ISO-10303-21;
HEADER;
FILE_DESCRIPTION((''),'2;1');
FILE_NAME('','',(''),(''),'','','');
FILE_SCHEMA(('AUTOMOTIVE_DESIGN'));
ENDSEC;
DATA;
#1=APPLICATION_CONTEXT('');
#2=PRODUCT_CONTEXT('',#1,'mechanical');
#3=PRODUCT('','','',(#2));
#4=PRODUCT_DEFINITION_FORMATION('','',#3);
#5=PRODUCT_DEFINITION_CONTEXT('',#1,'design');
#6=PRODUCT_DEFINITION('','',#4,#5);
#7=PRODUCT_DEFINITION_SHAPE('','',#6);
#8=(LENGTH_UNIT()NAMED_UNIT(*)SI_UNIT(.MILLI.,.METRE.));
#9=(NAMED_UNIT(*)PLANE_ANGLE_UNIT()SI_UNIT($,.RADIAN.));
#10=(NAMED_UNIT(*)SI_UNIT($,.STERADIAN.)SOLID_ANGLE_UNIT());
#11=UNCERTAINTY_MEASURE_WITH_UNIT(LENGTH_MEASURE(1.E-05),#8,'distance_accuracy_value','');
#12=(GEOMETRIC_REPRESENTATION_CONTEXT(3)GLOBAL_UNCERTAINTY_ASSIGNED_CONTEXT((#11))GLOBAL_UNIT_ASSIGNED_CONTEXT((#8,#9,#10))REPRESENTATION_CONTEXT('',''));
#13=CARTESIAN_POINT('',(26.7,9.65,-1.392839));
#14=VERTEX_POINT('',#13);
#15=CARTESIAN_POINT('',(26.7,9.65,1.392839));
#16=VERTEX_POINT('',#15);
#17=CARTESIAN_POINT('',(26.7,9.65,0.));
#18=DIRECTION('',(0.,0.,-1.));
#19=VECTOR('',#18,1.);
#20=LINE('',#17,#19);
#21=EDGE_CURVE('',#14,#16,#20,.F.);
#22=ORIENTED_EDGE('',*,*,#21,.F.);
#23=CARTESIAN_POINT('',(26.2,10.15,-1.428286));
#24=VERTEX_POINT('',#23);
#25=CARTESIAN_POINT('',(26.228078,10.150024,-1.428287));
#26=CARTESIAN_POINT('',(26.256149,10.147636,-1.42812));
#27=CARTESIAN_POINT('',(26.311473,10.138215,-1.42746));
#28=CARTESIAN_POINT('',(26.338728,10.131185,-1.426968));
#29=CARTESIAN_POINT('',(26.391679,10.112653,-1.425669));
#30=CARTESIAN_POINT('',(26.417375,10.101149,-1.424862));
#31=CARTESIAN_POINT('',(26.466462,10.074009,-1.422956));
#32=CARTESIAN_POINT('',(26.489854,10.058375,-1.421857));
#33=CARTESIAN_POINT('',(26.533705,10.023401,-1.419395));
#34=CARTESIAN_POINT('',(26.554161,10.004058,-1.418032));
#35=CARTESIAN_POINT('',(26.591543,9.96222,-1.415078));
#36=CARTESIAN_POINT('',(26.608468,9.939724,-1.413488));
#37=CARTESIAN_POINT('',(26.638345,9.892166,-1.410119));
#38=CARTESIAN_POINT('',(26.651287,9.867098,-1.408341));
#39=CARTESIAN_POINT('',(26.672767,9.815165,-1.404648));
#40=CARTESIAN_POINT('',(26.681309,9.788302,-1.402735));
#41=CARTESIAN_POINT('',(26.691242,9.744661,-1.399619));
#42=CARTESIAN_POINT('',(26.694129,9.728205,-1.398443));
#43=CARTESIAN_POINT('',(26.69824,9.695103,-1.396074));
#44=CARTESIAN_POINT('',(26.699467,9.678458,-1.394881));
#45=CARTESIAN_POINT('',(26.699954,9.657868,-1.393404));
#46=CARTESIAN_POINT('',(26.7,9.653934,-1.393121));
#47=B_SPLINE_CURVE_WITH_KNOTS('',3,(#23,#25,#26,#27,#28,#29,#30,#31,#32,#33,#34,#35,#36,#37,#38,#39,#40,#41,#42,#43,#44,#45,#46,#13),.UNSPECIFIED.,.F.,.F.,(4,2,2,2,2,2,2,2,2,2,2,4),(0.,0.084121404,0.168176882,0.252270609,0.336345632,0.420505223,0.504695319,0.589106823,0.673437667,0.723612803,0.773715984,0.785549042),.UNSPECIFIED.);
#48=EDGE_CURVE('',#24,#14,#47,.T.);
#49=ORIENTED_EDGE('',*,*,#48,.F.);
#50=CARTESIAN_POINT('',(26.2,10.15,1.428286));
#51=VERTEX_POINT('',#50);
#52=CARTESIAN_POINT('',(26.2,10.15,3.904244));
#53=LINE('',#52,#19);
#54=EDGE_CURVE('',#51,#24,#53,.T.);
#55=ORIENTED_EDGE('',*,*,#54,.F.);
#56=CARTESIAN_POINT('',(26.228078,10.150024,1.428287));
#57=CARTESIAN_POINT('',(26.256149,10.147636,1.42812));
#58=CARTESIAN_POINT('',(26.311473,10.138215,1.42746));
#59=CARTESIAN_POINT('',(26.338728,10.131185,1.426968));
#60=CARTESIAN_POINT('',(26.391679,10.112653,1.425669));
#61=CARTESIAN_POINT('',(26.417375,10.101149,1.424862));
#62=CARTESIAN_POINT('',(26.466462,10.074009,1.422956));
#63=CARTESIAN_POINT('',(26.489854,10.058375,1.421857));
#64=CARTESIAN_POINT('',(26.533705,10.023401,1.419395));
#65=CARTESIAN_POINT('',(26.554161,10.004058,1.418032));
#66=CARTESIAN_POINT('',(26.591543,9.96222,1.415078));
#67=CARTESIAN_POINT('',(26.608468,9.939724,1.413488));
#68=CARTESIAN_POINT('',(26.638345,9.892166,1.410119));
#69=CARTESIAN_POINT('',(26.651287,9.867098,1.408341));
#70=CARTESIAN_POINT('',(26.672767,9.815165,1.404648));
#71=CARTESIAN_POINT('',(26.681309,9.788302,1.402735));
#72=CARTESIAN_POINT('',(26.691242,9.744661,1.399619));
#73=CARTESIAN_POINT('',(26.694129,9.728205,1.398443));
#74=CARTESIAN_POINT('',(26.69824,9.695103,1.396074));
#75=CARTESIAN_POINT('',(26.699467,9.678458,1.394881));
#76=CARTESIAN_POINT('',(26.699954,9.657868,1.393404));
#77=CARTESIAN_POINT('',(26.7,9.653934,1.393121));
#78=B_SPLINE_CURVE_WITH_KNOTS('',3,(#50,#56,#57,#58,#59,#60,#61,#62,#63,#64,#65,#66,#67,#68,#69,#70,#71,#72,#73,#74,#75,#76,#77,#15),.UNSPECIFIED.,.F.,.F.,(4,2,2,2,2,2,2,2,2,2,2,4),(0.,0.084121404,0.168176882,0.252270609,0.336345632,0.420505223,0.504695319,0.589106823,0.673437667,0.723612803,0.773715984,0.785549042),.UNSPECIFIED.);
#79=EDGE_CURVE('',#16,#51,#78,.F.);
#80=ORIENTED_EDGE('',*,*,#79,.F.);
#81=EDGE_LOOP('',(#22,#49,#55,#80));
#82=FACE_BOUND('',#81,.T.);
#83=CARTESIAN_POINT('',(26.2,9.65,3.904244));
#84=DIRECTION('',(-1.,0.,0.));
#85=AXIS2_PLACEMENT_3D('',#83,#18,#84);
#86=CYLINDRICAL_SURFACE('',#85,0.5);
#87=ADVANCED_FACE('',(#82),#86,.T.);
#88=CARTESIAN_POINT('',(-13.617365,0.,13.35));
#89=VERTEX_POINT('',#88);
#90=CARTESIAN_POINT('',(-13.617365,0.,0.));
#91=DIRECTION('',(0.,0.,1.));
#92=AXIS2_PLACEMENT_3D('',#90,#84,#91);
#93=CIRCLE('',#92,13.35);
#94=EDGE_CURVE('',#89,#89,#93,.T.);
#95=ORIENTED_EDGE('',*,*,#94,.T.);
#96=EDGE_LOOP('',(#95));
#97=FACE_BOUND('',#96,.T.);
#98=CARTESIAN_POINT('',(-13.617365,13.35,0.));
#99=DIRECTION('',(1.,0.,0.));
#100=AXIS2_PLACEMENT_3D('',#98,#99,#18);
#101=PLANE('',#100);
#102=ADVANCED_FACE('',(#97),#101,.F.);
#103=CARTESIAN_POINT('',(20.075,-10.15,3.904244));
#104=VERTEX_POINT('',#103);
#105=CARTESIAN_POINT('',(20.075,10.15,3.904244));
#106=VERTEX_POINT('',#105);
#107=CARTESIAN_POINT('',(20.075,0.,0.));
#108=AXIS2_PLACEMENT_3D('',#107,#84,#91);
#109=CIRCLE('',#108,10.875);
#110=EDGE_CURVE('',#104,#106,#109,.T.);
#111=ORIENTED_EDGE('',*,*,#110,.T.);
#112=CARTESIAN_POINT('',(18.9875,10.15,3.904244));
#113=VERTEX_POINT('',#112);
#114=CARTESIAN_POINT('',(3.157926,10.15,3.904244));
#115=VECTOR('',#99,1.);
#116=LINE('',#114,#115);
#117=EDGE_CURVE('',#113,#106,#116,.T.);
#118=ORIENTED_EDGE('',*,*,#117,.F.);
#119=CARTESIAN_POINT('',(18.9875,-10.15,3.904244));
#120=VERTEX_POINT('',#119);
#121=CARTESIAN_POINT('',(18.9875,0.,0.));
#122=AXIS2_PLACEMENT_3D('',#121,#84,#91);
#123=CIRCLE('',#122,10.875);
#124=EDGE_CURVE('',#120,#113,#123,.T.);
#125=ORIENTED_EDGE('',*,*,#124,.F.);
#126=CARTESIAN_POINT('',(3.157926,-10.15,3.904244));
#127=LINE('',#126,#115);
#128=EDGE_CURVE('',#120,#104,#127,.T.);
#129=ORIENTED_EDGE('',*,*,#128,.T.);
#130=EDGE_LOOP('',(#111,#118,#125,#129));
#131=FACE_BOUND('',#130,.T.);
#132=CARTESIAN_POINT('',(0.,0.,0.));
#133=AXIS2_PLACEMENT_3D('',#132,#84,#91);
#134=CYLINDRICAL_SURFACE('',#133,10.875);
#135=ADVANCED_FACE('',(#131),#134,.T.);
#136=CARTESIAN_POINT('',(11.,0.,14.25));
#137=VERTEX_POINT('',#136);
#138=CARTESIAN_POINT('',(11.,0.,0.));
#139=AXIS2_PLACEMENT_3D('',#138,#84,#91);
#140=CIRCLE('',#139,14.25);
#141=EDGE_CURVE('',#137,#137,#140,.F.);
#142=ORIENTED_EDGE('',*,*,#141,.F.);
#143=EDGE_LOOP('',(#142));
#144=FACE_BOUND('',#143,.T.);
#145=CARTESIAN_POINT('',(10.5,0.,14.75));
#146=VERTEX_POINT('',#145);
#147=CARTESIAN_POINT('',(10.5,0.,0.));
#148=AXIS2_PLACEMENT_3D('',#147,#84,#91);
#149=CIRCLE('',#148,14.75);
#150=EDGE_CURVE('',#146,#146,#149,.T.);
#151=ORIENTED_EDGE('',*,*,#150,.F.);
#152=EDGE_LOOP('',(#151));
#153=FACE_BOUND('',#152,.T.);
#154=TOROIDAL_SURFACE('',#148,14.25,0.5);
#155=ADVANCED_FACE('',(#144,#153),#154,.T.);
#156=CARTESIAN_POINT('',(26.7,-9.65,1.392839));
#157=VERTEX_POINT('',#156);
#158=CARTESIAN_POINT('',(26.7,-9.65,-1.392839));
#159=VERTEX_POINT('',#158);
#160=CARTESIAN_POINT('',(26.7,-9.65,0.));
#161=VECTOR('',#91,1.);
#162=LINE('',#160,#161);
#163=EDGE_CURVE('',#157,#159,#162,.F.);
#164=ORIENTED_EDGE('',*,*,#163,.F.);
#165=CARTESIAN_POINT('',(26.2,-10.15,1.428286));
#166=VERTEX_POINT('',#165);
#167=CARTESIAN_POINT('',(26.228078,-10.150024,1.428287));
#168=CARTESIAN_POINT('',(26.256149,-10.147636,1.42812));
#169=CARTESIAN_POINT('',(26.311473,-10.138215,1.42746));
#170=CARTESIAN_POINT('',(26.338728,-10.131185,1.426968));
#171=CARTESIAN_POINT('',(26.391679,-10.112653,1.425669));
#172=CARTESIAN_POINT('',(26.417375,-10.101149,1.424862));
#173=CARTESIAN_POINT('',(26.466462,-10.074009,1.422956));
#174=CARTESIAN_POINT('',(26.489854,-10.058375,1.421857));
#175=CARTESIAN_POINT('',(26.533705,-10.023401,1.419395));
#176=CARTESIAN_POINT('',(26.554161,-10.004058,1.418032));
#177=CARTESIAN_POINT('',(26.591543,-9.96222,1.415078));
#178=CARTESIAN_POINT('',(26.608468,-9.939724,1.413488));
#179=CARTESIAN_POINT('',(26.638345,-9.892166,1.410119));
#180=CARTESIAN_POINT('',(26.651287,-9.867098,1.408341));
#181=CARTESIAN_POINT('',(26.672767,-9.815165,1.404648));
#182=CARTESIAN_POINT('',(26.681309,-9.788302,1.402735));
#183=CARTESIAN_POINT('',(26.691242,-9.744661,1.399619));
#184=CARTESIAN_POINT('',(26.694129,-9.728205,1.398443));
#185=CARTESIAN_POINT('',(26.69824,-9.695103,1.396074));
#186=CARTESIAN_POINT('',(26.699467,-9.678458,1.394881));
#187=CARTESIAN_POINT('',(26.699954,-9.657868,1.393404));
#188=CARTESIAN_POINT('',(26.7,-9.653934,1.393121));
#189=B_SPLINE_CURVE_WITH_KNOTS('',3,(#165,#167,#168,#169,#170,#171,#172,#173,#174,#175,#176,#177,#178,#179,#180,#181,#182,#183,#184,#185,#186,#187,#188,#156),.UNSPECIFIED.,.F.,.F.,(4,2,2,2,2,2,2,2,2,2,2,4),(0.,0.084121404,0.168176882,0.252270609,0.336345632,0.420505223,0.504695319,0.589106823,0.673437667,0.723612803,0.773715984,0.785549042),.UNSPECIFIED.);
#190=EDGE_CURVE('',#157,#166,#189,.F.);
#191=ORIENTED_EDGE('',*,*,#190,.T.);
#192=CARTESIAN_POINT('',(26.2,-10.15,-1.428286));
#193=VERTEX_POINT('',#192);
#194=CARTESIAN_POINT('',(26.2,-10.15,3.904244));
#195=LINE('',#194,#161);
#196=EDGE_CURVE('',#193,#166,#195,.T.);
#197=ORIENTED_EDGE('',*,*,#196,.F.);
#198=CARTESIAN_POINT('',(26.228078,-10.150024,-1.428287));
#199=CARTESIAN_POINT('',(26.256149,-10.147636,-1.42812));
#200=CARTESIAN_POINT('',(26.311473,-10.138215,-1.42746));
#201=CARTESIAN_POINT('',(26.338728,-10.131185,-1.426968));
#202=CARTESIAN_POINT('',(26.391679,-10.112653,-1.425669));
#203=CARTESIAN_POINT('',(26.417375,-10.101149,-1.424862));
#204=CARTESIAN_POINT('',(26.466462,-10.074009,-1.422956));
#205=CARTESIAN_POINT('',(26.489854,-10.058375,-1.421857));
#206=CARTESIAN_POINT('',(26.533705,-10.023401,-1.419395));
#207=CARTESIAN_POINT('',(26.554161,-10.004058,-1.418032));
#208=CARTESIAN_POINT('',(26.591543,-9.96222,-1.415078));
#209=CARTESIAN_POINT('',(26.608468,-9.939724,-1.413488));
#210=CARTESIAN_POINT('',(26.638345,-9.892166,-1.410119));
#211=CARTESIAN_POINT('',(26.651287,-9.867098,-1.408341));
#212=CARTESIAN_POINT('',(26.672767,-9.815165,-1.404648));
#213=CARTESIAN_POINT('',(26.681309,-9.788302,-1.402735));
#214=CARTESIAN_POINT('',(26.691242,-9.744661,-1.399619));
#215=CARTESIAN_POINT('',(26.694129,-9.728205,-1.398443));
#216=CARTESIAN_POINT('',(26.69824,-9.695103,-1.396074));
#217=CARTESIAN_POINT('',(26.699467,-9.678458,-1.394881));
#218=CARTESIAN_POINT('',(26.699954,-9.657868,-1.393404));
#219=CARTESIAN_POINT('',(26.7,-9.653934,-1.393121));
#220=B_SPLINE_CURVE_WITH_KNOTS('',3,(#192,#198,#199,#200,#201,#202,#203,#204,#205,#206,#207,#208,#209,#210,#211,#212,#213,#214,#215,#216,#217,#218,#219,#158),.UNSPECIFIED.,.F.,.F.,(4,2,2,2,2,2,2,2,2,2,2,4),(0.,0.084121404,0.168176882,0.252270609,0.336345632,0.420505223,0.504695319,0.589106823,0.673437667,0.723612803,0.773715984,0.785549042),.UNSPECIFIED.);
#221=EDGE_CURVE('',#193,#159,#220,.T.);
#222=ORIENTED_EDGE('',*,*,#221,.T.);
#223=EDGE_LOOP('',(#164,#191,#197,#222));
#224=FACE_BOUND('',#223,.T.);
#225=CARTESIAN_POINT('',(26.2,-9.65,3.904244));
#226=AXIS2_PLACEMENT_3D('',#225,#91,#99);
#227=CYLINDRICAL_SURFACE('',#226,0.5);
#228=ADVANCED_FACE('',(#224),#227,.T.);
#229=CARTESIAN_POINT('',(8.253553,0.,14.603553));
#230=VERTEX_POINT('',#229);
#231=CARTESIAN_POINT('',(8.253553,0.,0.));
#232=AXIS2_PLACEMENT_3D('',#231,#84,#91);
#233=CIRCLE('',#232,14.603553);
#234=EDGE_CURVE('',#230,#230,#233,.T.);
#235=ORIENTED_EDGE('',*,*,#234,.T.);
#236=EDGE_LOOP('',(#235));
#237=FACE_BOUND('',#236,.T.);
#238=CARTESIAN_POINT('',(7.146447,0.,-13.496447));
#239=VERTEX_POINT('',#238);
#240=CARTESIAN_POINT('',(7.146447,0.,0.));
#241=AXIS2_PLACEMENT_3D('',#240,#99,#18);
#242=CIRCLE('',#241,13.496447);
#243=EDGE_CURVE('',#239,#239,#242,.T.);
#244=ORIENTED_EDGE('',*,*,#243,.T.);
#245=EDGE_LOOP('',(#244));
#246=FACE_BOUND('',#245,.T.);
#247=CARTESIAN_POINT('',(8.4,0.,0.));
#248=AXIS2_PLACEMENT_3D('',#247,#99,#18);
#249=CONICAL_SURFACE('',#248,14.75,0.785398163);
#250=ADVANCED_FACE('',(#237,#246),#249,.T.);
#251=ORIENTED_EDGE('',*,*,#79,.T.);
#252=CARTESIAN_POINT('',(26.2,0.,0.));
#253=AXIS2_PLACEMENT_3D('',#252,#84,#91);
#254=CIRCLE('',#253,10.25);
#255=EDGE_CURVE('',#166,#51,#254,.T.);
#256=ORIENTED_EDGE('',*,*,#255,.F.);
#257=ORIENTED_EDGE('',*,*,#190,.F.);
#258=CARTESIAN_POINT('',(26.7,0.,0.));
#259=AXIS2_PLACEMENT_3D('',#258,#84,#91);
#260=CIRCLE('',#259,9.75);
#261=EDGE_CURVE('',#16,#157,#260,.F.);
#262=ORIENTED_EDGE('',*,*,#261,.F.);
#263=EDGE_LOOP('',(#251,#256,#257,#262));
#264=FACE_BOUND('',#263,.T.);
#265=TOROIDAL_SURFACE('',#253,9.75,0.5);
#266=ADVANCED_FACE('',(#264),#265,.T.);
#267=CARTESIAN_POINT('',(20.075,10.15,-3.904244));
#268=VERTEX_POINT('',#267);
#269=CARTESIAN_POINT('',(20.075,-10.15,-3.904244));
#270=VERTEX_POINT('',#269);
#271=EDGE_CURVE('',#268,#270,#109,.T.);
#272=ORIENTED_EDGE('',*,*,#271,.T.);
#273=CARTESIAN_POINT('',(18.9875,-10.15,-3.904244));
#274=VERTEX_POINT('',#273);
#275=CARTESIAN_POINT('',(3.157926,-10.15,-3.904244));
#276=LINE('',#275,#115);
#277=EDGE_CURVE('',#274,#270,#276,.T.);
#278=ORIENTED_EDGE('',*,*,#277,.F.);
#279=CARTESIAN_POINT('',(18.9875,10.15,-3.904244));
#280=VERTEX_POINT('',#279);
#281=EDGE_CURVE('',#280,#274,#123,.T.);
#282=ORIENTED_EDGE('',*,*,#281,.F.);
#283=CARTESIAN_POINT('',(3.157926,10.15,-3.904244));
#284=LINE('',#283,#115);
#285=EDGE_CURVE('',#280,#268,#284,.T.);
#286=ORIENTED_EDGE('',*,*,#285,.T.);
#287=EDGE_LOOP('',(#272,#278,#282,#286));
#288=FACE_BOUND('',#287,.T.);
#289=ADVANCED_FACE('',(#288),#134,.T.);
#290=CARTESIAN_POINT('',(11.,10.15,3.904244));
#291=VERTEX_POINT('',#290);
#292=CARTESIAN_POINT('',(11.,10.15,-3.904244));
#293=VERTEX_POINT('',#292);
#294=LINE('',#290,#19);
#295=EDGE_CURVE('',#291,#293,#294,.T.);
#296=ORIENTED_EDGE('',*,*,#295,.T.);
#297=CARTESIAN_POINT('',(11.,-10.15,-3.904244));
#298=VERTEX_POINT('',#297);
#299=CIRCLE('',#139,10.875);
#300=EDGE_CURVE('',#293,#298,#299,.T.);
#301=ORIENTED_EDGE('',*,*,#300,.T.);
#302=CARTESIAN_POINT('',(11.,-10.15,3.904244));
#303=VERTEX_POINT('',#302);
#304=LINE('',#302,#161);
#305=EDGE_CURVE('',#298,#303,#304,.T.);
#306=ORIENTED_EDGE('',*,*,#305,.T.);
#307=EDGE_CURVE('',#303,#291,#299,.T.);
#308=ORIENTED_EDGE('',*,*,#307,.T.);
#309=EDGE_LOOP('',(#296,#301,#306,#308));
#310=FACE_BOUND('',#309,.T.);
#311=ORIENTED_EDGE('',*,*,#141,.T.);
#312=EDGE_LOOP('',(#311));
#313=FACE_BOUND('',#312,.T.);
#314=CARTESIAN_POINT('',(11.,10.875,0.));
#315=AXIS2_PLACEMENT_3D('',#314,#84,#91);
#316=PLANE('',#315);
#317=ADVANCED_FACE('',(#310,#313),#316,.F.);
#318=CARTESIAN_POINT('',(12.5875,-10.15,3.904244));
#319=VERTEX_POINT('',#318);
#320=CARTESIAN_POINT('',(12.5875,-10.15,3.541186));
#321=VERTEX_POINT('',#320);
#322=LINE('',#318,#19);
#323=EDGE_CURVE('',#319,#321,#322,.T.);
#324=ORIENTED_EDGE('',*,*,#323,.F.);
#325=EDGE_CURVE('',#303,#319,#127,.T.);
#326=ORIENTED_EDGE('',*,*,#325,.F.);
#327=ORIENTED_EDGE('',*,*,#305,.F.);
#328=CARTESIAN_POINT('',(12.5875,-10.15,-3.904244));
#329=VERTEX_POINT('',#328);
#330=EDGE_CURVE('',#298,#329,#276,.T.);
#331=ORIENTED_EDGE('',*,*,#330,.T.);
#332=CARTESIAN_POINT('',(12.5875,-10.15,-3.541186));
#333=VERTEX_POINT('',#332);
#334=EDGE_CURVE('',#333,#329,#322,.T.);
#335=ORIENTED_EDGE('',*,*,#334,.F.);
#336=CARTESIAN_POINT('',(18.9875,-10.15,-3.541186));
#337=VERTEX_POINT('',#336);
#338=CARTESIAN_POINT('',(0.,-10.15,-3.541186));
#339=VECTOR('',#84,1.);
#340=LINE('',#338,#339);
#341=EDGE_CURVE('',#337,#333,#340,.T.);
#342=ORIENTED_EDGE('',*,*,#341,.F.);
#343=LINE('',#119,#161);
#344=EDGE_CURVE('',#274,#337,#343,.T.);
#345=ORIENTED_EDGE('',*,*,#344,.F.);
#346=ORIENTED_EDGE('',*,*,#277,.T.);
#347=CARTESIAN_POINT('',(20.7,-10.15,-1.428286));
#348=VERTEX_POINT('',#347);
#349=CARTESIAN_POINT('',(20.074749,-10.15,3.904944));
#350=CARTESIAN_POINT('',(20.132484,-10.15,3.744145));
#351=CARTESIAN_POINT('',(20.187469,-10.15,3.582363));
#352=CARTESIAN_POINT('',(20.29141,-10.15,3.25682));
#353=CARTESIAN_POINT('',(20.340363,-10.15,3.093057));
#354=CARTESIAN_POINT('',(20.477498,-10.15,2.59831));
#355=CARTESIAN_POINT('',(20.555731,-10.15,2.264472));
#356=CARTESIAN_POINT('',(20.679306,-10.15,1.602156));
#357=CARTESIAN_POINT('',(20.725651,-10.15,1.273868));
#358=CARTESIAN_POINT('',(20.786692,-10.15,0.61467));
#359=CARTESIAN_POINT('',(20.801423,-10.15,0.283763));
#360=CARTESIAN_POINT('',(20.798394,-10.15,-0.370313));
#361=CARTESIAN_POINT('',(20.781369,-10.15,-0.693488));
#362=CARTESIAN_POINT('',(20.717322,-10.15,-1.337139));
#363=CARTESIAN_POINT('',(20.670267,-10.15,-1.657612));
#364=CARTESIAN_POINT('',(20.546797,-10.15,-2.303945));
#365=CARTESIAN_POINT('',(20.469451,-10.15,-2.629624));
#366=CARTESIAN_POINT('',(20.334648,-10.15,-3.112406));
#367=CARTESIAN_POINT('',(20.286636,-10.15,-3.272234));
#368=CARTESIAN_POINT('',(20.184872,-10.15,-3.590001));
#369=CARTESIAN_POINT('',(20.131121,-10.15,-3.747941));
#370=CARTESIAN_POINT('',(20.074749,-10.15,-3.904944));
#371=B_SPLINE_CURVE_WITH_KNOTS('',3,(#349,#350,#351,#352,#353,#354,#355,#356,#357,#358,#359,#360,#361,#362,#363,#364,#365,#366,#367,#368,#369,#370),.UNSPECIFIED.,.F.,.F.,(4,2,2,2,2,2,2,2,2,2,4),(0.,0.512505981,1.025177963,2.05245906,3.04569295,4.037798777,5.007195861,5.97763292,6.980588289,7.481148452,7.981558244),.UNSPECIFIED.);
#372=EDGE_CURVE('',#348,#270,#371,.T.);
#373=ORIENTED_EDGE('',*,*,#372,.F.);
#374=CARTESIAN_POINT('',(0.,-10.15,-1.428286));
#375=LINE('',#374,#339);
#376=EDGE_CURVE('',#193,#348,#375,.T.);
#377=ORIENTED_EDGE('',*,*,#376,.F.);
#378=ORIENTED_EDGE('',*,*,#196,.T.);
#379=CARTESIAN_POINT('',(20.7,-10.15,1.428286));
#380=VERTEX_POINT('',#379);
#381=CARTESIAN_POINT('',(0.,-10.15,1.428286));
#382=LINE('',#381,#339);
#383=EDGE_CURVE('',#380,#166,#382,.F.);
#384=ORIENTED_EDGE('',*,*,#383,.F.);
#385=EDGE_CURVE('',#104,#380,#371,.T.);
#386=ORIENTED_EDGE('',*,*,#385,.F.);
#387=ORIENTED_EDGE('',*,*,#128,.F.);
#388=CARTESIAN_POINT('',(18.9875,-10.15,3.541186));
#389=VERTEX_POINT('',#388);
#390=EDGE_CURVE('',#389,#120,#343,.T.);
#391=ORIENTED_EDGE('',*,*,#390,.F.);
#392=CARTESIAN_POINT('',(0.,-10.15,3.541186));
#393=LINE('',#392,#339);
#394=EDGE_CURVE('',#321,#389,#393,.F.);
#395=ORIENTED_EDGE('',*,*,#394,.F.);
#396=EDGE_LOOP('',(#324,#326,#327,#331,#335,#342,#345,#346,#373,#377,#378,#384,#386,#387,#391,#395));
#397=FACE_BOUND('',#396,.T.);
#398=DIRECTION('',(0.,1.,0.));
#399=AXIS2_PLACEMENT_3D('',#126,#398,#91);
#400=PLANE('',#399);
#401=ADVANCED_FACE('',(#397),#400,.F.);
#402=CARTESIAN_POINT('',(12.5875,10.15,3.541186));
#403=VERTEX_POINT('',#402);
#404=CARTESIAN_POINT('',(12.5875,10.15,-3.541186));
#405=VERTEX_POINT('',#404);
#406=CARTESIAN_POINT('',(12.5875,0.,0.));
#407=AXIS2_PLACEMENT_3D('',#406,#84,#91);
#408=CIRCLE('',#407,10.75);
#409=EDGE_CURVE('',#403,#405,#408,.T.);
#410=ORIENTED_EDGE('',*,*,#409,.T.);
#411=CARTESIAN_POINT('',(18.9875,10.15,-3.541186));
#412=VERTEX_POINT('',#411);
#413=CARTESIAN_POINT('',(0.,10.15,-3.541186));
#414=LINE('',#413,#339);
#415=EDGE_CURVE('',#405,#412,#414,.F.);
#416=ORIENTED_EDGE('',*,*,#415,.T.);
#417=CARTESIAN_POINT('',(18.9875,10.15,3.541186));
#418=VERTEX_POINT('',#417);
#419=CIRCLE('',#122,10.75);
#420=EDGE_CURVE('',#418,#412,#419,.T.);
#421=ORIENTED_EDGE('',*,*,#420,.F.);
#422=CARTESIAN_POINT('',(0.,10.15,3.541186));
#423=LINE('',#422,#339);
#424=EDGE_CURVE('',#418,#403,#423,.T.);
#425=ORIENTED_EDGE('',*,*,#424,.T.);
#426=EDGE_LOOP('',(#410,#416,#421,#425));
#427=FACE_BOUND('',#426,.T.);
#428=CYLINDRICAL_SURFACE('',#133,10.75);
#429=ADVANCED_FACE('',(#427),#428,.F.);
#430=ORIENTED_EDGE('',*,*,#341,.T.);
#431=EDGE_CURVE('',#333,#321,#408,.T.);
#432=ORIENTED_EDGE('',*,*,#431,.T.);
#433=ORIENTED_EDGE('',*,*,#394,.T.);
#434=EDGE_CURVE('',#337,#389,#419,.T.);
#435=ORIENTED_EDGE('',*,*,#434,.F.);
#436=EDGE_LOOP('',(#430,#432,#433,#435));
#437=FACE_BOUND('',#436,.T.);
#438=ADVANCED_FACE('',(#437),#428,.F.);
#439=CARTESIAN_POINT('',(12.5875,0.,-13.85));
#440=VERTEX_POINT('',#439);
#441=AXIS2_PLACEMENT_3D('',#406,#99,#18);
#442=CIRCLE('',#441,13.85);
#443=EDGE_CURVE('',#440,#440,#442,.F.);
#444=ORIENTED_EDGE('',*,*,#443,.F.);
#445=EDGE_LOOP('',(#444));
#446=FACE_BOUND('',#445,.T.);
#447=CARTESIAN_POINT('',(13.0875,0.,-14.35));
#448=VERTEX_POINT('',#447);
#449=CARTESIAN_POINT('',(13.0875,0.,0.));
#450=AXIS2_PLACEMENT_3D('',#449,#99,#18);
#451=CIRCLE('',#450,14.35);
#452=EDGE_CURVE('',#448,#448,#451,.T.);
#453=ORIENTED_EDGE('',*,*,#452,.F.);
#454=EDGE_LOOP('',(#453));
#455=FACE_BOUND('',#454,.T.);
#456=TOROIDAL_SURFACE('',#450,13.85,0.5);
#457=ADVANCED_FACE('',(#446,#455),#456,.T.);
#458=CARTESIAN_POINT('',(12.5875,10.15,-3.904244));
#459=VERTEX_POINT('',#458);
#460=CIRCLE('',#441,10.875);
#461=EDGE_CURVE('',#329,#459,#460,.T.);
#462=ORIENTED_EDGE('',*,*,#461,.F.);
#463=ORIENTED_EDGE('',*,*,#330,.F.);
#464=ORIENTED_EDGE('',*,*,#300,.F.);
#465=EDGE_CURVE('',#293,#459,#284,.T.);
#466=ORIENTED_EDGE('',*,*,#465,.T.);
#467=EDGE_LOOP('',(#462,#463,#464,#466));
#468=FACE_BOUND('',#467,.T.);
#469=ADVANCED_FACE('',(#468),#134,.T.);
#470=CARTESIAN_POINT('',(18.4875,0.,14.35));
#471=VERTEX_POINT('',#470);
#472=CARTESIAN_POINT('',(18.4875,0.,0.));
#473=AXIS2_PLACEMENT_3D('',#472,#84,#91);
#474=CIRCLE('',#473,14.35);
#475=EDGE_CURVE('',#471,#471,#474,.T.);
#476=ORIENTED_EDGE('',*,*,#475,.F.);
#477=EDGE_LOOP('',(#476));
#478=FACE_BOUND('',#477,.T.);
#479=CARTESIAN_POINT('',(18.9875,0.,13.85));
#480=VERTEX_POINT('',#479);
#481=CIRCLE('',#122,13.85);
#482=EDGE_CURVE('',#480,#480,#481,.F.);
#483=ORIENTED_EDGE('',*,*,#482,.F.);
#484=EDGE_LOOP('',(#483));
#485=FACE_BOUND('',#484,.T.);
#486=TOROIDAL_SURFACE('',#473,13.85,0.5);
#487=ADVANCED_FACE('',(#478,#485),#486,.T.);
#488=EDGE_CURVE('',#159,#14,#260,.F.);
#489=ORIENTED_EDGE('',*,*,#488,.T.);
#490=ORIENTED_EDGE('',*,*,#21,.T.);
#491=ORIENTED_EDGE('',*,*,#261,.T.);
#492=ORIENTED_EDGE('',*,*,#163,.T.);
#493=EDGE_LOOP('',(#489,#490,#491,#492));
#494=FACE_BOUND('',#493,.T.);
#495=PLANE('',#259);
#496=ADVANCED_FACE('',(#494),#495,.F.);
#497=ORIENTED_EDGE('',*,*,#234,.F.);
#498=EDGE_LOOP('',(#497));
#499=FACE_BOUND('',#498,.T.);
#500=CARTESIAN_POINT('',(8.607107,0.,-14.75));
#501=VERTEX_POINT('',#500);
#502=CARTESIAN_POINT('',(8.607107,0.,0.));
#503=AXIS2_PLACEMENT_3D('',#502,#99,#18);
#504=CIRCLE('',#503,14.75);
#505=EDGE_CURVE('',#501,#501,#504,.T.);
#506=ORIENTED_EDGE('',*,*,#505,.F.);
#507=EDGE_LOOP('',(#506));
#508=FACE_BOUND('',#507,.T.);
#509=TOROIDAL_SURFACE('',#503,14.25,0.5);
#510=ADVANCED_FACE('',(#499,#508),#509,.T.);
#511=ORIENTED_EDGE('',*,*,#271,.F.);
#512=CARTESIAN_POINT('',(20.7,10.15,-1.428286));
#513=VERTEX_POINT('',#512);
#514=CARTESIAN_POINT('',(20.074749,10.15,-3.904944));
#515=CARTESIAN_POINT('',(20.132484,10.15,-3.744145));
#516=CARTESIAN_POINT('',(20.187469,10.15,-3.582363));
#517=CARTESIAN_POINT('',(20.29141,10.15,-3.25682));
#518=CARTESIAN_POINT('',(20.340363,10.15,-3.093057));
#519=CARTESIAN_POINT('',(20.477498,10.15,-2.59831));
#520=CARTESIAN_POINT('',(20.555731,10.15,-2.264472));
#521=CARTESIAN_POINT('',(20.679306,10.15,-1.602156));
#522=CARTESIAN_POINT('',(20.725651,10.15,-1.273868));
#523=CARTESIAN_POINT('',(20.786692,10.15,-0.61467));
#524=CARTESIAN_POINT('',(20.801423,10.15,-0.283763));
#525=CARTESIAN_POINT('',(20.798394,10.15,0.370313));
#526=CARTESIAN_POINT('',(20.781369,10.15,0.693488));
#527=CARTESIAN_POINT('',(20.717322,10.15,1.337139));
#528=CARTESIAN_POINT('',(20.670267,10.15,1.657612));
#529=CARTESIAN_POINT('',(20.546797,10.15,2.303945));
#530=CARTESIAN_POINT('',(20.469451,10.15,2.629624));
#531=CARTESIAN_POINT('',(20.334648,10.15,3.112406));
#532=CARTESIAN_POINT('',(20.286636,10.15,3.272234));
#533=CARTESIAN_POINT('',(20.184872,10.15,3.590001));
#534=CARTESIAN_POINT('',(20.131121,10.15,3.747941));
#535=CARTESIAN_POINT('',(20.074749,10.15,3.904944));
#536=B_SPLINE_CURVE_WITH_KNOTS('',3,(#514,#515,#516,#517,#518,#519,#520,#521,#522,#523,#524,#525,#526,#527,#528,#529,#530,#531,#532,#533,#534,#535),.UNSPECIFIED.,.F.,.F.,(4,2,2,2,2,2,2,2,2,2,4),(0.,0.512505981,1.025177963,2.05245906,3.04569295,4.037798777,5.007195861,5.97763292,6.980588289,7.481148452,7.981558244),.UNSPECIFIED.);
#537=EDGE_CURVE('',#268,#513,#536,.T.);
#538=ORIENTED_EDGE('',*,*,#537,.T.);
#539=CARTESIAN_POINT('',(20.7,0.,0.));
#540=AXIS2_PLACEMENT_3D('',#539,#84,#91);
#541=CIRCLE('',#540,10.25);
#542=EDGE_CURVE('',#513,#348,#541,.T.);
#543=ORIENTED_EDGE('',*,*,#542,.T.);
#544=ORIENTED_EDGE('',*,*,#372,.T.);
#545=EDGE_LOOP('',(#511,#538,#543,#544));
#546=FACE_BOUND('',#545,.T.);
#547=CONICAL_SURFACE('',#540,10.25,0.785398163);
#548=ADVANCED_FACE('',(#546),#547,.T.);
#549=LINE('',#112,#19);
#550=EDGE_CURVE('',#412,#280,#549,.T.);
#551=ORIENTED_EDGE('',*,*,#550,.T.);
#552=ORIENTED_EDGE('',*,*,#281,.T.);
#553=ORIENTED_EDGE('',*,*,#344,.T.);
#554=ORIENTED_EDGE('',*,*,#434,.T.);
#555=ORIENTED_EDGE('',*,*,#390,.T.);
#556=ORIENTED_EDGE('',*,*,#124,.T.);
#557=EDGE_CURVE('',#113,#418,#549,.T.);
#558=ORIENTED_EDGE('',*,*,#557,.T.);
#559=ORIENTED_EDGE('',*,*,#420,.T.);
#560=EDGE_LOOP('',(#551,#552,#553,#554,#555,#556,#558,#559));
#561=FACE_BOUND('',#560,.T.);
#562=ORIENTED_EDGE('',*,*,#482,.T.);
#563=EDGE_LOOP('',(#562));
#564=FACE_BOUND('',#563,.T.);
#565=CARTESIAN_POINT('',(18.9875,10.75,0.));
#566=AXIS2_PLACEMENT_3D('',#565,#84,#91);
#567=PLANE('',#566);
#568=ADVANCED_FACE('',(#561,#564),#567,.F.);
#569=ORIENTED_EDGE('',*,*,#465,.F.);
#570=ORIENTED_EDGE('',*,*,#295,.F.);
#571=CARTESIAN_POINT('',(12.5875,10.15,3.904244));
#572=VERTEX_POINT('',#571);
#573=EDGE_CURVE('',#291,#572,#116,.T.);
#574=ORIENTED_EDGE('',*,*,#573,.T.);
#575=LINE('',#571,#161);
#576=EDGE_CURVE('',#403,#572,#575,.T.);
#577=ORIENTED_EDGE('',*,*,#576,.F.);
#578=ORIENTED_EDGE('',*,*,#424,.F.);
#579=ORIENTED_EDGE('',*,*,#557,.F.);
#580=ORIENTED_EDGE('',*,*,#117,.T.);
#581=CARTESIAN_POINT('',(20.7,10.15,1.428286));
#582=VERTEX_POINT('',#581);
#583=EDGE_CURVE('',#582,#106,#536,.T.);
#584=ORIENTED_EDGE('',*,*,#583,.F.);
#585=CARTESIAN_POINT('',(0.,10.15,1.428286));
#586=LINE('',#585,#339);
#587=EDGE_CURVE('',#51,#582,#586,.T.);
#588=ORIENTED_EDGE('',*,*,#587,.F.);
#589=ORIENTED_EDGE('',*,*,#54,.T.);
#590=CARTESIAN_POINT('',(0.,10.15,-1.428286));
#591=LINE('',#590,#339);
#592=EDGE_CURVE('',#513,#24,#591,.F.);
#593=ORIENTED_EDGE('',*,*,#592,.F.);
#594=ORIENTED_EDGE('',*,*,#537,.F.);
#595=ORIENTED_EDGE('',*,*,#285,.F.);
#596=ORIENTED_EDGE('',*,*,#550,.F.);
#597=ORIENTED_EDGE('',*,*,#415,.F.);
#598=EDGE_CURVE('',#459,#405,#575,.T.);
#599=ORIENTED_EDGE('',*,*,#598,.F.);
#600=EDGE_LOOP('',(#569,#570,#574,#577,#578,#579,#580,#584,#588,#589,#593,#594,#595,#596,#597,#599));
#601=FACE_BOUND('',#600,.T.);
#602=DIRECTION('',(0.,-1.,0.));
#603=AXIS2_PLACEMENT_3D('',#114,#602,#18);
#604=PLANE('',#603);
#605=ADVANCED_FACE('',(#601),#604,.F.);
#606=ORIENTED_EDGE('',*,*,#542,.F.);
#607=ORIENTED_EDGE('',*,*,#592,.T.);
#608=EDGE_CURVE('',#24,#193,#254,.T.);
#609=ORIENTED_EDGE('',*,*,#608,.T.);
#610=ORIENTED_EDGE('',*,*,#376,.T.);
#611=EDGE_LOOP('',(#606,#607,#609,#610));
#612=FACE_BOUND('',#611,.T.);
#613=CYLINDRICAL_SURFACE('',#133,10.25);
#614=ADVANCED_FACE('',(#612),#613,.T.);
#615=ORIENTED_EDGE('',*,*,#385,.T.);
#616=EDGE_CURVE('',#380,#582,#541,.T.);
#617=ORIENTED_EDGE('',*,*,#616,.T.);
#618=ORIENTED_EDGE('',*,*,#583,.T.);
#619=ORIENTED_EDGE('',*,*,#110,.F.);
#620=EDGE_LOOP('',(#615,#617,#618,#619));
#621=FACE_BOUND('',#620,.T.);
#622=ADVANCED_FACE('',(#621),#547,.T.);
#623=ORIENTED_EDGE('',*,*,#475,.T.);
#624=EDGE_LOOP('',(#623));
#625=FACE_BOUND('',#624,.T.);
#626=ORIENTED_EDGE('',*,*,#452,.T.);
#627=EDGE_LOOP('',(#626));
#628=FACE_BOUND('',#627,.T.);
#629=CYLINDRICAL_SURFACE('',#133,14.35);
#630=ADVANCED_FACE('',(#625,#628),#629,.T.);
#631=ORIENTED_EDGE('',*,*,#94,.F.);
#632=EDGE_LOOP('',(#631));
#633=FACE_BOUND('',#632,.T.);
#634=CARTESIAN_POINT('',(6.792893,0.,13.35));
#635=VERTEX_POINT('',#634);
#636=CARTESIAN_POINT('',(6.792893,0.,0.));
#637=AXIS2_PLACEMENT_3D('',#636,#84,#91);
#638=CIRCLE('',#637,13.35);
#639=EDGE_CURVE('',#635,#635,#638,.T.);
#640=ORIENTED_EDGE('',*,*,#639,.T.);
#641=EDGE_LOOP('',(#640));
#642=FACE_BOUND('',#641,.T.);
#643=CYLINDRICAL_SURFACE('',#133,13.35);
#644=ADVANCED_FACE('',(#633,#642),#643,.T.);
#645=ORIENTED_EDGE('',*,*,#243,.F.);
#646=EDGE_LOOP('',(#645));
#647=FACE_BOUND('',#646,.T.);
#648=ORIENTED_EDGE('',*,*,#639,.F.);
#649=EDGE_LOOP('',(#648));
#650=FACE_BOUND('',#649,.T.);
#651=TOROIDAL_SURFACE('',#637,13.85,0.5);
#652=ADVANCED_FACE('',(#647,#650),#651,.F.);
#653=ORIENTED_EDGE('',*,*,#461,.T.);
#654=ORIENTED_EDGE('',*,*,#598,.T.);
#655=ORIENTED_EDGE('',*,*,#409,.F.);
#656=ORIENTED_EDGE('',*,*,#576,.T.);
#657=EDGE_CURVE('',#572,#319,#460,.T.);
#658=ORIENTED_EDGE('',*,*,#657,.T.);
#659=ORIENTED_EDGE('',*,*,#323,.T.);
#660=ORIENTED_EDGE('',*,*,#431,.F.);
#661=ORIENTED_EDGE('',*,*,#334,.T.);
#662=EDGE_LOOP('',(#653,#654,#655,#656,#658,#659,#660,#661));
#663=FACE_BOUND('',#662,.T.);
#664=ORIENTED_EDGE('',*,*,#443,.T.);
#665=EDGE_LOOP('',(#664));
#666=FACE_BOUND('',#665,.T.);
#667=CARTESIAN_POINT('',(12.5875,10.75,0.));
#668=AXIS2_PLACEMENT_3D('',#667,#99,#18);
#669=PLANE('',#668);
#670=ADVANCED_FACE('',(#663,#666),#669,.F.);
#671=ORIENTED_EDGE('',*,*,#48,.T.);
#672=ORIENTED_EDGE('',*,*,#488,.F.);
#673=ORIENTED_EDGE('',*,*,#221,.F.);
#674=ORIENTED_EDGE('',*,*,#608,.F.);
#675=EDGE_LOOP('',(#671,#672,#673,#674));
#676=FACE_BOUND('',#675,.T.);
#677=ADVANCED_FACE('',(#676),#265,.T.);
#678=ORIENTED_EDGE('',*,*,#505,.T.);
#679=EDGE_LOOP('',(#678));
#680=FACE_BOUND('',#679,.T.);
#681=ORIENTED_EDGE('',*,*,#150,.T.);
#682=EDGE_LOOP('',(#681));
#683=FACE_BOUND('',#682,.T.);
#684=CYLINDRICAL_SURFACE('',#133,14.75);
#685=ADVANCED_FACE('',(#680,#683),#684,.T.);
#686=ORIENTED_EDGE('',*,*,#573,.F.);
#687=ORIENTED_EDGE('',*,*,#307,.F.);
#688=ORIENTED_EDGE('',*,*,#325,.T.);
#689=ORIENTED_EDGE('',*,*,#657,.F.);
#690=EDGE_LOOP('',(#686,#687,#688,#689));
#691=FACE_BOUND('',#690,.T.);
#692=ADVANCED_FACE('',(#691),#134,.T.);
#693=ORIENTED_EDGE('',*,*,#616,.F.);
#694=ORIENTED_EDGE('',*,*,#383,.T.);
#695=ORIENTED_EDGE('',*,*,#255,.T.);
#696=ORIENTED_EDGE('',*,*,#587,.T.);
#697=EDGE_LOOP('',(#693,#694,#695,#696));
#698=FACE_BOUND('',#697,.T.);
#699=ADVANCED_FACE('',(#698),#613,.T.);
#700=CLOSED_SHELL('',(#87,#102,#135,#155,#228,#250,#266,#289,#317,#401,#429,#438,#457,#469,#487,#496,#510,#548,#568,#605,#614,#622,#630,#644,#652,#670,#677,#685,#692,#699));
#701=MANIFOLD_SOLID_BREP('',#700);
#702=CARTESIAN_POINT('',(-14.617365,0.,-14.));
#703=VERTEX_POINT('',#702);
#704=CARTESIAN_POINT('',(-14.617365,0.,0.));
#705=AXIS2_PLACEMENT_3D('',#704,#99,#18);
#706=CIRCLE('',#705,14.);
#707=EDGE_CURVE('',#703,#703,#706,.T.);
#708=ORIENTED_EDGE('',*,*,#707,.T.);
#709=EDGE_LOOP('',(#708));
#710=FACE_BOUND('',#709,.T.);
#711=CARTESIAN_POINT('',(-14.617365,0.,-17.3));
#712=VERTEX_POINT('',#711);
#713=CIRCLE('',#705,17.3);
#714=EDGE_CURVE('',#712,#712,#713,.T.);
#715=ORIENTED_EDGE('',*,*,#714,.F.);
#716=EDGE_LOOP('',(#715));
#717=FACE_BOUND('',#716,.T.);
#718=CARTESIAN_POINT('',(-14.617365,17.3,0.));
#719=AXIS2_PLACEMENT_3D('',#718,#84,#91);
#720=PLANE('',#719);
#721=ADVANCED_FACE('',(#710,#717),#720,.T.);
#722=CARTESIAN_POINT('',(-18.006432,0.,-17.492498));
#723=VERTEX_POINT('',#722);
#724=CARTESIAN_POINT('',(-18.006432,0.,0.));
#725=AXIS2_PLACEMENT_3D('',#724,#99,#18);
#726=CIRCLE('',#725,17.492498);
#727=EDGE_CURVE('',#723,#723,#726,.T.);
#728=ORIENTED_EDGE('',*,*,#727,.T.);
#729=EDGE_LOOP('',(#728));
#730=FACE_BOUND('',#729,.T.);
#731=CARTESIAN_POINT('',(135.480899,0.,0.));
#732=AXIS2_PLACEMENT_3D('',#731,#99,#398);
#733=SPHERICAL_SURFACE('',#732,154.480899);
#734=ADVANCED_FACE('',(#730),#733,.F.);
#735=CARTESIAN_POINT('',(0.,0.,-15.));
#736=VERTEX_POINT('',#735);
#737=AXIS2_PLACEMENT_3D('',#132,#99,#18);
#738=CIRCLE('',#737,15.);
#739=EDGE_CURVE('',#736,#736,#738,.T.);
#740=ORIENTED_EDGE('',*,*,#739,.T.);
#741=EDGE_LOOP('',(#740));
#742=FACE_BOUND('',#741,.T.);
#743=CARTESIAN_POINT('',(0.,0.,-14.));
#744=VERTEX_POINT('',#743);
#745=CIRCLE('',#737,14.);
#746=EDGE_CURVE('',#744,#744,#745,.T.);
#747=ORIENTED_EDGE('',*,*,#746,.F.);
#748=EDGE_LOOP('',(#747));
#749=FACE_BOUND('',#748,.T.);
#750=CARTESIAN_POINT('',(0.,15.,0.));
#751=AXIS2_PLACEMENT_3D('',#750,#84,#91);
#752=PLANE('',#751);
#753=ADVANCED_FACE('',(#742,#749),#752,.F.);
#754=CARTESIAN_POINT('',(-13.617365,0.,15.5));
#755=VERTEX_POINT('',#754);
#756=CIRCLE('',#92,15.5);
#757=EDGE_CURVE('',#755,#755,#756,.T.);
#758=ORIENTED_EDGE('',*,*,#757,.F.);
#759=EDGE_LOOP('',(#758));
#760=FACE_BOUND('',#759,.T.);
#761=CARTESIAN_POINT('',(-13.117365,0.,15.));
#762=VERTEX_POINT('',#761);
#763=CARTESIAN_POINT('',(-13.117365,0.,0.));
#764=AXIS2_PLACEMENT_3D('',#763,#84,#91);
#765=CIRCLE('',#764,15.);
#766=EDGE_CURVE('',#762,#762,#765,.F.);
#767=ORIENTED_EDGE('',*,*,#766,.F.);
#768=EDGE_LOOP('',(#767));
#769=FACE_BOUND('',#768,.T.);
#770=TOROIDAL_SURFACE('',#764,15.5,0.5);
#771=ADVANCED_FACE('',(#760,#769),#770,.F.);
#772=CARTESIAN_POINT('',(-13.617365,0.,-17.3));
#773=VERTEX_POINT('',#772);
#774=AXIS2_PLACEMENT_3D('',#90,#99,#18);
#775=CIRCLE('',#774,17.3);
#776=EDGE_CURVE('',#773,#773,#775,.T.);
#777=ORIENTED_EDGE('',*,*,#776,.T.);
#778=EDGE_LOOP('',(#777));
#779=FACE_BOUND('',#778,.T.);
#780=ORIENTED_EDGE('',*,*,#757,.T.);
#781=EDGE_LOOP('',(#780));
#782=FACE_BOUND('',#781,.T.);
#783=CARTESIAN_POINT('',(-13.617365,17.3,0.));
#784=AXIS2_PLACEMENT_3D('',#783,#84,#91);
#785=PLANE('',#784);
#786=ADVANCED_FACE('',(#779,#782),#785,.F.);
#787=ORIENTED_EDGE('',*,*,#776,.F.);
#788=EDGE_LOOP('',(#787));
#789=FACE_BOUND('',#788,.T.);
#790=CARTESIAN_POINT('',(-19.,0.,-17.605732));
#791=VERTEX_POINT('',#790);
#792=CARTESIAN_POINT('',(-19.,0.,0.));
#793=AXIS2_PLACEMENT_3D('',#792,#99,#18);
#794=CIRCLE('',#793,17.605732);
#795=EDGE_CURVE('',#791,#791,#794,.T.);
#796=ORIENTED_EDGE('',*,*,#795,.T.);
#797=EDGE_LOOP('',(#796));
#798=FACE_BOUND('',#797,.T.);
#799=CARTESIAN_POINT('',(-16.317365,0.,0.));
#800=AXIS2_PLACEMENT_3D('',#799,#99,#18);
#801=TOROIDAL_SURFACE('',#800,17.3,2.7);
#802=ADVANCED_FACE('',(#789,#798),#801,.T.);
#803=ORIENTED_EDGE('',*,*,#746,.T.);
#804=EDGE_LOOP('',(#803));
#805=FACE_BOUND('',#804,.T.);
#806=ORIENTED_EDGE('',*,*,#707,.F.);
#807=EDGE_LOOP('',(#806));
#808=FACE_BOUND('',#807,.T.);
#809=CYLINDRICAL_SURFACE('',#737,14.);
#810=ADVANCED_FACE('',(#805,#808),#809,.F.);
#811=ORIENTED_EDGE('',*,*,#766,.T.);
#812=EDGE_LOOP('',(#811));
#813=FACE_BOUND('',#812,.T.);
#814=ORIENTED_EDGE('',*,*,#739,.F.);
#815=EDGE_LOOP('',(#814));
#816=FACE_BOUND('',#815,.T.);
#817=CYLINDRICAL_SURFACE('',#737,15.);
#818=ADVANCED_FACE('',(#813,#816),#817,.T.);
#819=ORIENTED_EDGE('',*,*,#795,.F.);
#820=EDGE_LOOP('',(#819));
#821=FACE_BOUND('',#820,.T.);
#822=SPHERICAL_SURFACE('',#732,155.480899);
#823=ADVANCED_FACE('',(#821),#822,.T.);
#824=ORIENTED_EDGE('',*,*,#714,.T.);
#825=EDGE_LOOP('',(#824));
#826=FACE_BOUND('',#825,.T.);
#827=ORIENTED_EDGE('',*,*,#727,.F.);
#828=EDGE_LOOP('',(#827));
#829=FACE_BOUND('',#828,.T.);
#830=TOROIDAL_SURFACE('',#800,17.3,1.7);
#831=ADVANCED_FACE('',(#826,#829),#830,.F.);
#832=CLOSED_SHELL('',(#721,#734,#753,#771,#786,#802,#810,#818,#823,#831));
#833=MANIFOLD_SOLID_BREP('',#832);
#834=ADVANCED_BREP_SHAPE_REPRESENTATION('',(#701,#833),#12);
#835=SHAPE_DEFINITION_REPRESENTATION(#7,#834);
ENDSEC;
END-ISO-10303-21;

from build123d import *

# Parameters (mm, degrees)
CUT_EXTRUDE1_REACH = 56.598
SKETCH3_W          = 6.4
SKETCH3_H          = 3.6
FILLET1_R          = 0.5
FILLET2_R          = 0.5


with BuildPart() as part:
    # Sketch1 → Revolve-Thin1 (revolve)
    with BuildSketch(Plane.XY, mode=Mode.PRIVATE) as revolve_thin1_sk:
        with BuildLine():
            ThreePointArc((-20, 0), (-19.749798687, 8.817054455), (-19, 17.605731937))
            ThreePointArc((-19, 17.605731937), (-16.164253119, 19.995655135), (-13.617365477, 17.3))
            Line((-13.617365477, 17.3), (-13.617365477, 15))
            Line((-13.617365477, 15), (0, 15))
            Line((0, 15), (0, 14))
            Line((0, 14), (-14.617365477, 14))
            Line((-14.617365477, 14), (-14.617365477, 17.3))
            ThreePointArc((-14.617365477, 17.3), (-16.2209614, 18.997264344), (-18.006431658, 17.492497886))
            ThreePointArc((-18.006431658, 17.492497886), (-18.751407896, 8.760346174), (-19, 0))
            Line((-19, 0), (-20, 0))
        make_face()
    revolve(revolve_thin1_sk.sketch.rotate(Axis((0, 0, 0), (-1, 0, 0)), 90), axis=Axis((0, 0, 0), (-1, 0, 0)))

    # Fillet2
    fillet2_edges = [part.edges().sort_by_distance(p)[0] for p in [
        (-13.617365477, 0, 15),
    ]]
    fillet(fillet2_edges, radius=FILLET2_R)


with BuildPart() as body_2:
    # Sketch2 → Revolve1 (revolve)
    with BuildSketch(Plane.XY, mode=Mode.PRIVATE) as revolve1_sk:
        Polygon((26.7, 0), (26.7, 10.25), (20.7, 10.25), (20.075, 10.875), (11, 10.875), (11, 14.75), (8.4, 14.75), (7, 13.35), (-13.617365477, 13.35), (-13.617365477, 0), align=None)
    revolve(revolve1_sk.sketch.rotate(Axis((0, 0, 0), (1, 0, 0)), 90), axis=Axis((0, 0, 0), (1, 0, 0)))

    # Cut-Extrude1: up to this face of the body (flat: up to its plane)
    cut_extrude1_end = Plane(body_2.part.faces().sort_by_distance((11, 0, -11.292193001))[0])
    # Sketch4 → Cut-Extrude1 (cut, up to the picked face)
    with BuildSketch(Plane(origin=(26.7, 0, 0), x_dir=(0, 0, -1), z_dir=(1, 0, 0)), mode=Mode.PRIVATE) as cut_extrude1_sk1:
        with BuildLine():
            Line((-3.904244485, 10.15), (3.904244485, 10.15))
            ThreePointArc((3.904244485, 10.15), (0, 10.875), (-3.904244485, 10.15))
        make_face()
    cut_extrude1_tool1 = split(extrude(cut_extrude1_sk1.sketch, amount=-CUT_EXTRUDE1_REACH, mode=Mode.PRIVATE), bisect_by=cut_extrude1_end, keep=Keep.BOTH, mode=Mode.PRIVATE)
    # Sketch4 → Cut-Extrude1 (cut, up to the picked face)
    with BuildSketch(Plane(origin=(26.7, 0, 0), x_dir=(0, 0, -1), z_dir=(1, 0, 0)), mode=Mode.PRIVATE) as cut_extrude1_sk2:
        with BuildLine():
            Line((-3.904244485, -10.15), (3.904244485, -10.15))
            ThreePointArc((3.904244485, -10.15), (0, -10.875), (-3.904244485, -10.15))
        make_face()
    cut_extrude1_tool2 = split(extrude(cut_extrude1_sk2.sketch, amount=-CUT_EXTRUDE1_REACH, mode=Mode.PRIVATE), bisect_by=cut_extrude1_end, keep=Keep.BOTH, mode=Mode.PRIVATE)
    add(cut_extrude1_tool1.solids().sort_by(Axis((26.7, 10.440845, 0), (-1, 0, 0)))[0], mode=Mode.SUBTRACT)
    add(cut_extrude1_tool2.solids().sort_by(Axis((26.7, -10.440845, 0), (-1, 0, 0)))[0], mode=Mode.SUBTRACT)

    # Sketch3 → Revolve2 (revolve)
    with BuildSketch(Plane.XY):
        with Locations((15.7875, 12.55)):
            Rectangle(SKETCH3_W, SKETCH3_H)
    revolve(axis=Axis((0, 0, 0), (1, 0, 0)))

    # Fillet1
    # the kernel refuses this fillet: 0.5 mm, written as the material it adds along each edge
    with BuildSketch(Plane(origin=(7, 0, 0), x_dir=(0, 0, 1), z_dir=(0, 1, 0))) as fillet1_piece_1:
        with BuildLine():
            CenterArc((13.35 + FILLET1_R, -FILLET1_R * 0.414213562373), FILLET1_R, 135, 45)
            Line((13.35, -FILLET1_R * 0.414213562373), (13.35 - FILLET1_R * 0.02, -FILLET1_R * 0.414213562373))
            Line((13.35 - FILLET1_R * 0.02, -FILLET1_R * 0.414213562373), (13.35 - FILLET1_R * 0.02, FILLET1_R * 0.00828427124746))
            Line((13.35 - FILLET1_R * 0.02, FILLET1_R * 0.00828427124746), (13.35 + FILLET1_R * 0.27875108319, FILLET1_R * 0.307035354437))
            Line((13.35 + FILLET1_R * 0.27875108319, FILLET1_R * 0.307035354437), (13.35 + FILLET1_R * 0.292893218813, FILLET1_R * 0.292893218813))
        make_face()
    revolve(axis=Axis((7, 0, 0), (1, 0, 0)))
    # the kernel refuses this fillet: 0.5 mm, written as the material it takes off along each edge
    with BuildSketch(Plane(origin=(26.7, 0, 0), x_dir=(0, -0.9998436081604841, -0.017684999876288746), z_dir=(0, -0.017684999876288746, 0.9998436081604841))) as fillet1_2_piece_1:
        with BuildLine():
            CenterArc((10.25 - FILLET1_R, -FILLET1_R), FILLET1_R, 0, 90)
            Line((10.25, -FILLET1_R), (10.25 + FILLET1_R * 0.02, -FILLET1_R))
            Line((10.25 + FILLET1_R * 0.02, -FILLET1_R), (10.25 + FILLET1_R * 0.02, FILLET1_R * 0.02))
            Line((10.25 + FILLET1_R * 0.02, FILLET1_R * 0.02), (10.25 - FILLET1_R, FILLET1_R * 0.02))
            Line((10.25 - FILLET1_R, FILLET1_R * 0.02), (10.25 - FILLET1_R, 0))
        make_face()
    revolve(axis=Axis((26.7, 0, 0), (1, 0, 0)), revolution_arc=177.973342641, mode=Mode.SUBTRACT)
    with BuildSketch(Plane(origin=(26.7, 0, 0), x_dir=(0, 0.999843608160485, 0.0176849998762355), z_dir=(0, 0.0176849998762355, -0.999843608160485))) as fillet1_2_piece_2:
        with BuildLine():
            CenterArc((10.25 - FILLET1_R, -FILLET1_R), FILLET1_R, 0, 90)
            Line((10.25, -FILLET1_R), (10.25 + FILLET1_R * 0.02, -FILLET1_R))
            Line((10.25 + FILLET1_R * 0.02, -FILLET1_R), (10.25 + FILLET1_R * 0.02, FILLET1_R * 0.02))
            Line((10.25 + FILLET1_R * 0.02, FILLET1_R * 0.02), (10.25 - FILLET1_R, FILLET1_R * 0.02))
            Line((10.25 - FILLET1_R, FILLET1_R * 0.02), (10.25 - FILLET1_R, 0))
        make_face()
    revolve(axis=Axis((26.7, 0, 0), (1, 0, 0)), revolution_arc=177.973342641, mode=Mode.SUBTRACT)
    with BuildSketch(Plane(origin=(26.7, 10.15, 2.678285686), x_dir=(0, -1, 0), z_dir=(0, 0, -1))) as fillet1_2_piece_3:
        with BuildLine():
            CenterArc((FILLET1_R, FILLET1_R), FILLET1_R, 180, 90)
            Line((0, FILLET1_R), (-FILLET1_R * 0.02, FILLET1_R))
            Line((-FILLET1_R * 0.02, FILLET1_R), (-FILLET1_R * 0.02, -FILLET1_R * 0.02))
            Line((-FILLET1_R * 0.02, -FILLET1_R * 0.02), (FILLET1_R, -FILLET1_R * 0.02))
            Line((FILLET1_R, -FILLET1_R * 0.02), (FILLET1_R, 0))
        make_face()
    extrude(amount=5.356571371, mode=Mode.SUBTRACT)
    with BuildSketch(Plane(origin=(26.7, -10.15, 2.678285686), x_dir=(0, 1, 0), z_dir=(0, 0, -1))) as fillet1_2_piece_4:
        with BuildLine():
            CenterArc((FILLET1_R, -FILLET1_R), FILLET1_R, 90, 90)
            Line((0, -FILLET1_R), (-FILLET1_R * 0.02, -FILLET1_R))
            Line((-FILLET1_R * 0.02, -FILLET1_R), (-FILLET1_R * 0.02, FILLET1_R * 0.02))
            Line((-FILLET1_R * 0.02, FILLET1_R * 0.02), (FILLET1_R, FILLET1_R * 0.02))
            Line((FILLET1_R, FILLET1_R * 0.02), (FILLET1_R, 0))
        make_face()
    extrude(amount=5.356571371, mode=Mode.SUBTRACT)
    with BuildSketch(Plane(origin=(12.5875, 0, 0), x_dir=(0, 1, 0), z_dir=(0, 0, -1))) as fillet1_2_piece_5:
        with BuildLine():
            CenterArc((14.35 - FILLET1_R, FILLET1_R), FILLET1_R, 270, 90)
            Line((14.35, FILLET1_R), (14.35 + FILLET1_R * 0.02, FILLET1_R))
            Line((14.35 + FILLET1_R * 0.02, FILLET1_R), (14.35 + FILLET1_R * 0.02, -FILLET1_R * 0.02))
            Line((14.35 + FILLET1_R * 0.02, -FILLET1_R * 0.02), (14.35 - FILLET1_R, -FILLET1_R * 0.02))
            Line((14.35 - FILLET1_R, -FILLET1_R * 0.02), (14.35 - FILLET1_R, 0))
        make_face()
    revolve(axis=Axis((12.5875, 0, 0), (1, 0, 0)), mode=Mode.SUBTRACT)
    with BuildSketch(Plane(origin=(18.9875, 0, 0), x_dir=(0, 1, 0), z_dir=(0, 0, -1))) as fillet1_2_piece_6:
        with BuildLine():
            CenterArc((14.35 - FILLET1_R, -FILLET1_R), FILLET1_R, 0, 90)
            Line((14.35, -FILLET1_R), (14.35 + FILLET1_R * 0.02, -FILLET1_R))
            Line((14.35 + FILLET1_R * 0.02, -FILLET1_R), (14.35 + FILLET1_R * 0.02, FILLET1_R * 0.02))
            Line((14.35 + FILLET1_R * 0.02, FILLET1_R * 0.02), (14.35 - FILLET1_R, FILLET1_R * 0.02))
            Line((14.35 - FILLET1_R, FILLET1_R * 0.02), (14.35 - FILLET1_R, 0))
        make_face()
    revolve(axis=Axis((18.9875, 0, 0), (1, 0, 0)), mode=Mode.SUBTRACT)
    with BuildSketch(Plane(origin=(8.4, 0, 0), x_dir=(0, 0, 1), z_dir=(0, 1, 0))) as fillet1_2_piece_7:
        with BuildLine():
            CenterArc((14.75 - FILLET1_R, FILLET1_R * 0.414213562373), FILLET1_R, 315, 45)
            Line((14.75 - FILLET1_R * 0.292893218813, -FILLET1_R * 0.292893218813), (14.75 - FILLET1_R * 0.27875108319, -FILLET1_R * 0.307035354437))
            Line((14.75 - FILLET1_R * 0.27875108319, -FILLET1_R * 0.307035354437), (14.75 + FILLET1_R * 0.02, -FILLET1_R * 0.00828427124746))
            Line((14.75 + FILLET1_R * 0.02, -FILLET1_R * 0.00828427124746), (14.75 + FILLET1_R * 0.02, FILLET1_R * 0.414213562373))
            Line((14.75 + FILLET1_R * 0.02, FILLET1_R * 0.414213562373), (14.75, FILLET1_R * 0.414213562373))
        make_face()
    revolve(axis=Axis((8.4, 0, 0), (1, 0, 0)), mode=Mode.SUBTRACT)
    with BuildSketch(Plane(origin=(11, 0, 0), x_dir=(0, 0, 1), z_dir=(0, 1, 0))) as fillet1_2_piece_8:
        with BuildLine():
            CenterArc((14.75 - FILLET1_R, -FILLET1_R), FILLET1_R, 0, 90)
            Line((14.75, -FILLET1_R), (14.75 + FILLET1_R * 0.02, -FILLET1_R))
            Line((14.75 + FILLET1_R * 0.02, -FILLET1_R), (14.75 + FILLET1_R * 0.02, FILLET1_R * 0.02))
            Line((14.75 + FILLET1_R * 0.02, FILLET1_R * 0.02), (14.75 - FILLET1_R, FILLET1_R * 0.02))
            Line((14.75 - FILLET1_R, FILLET1_R * 0.02), (14.75 - FILLET1_R, 0))
        make_face()
    revolve(axis=Axis((11, 0, 0), (1, 0, 0)), mode=Mode.SUBTRACT)


solid = Compound([part.part, body_2.part])
